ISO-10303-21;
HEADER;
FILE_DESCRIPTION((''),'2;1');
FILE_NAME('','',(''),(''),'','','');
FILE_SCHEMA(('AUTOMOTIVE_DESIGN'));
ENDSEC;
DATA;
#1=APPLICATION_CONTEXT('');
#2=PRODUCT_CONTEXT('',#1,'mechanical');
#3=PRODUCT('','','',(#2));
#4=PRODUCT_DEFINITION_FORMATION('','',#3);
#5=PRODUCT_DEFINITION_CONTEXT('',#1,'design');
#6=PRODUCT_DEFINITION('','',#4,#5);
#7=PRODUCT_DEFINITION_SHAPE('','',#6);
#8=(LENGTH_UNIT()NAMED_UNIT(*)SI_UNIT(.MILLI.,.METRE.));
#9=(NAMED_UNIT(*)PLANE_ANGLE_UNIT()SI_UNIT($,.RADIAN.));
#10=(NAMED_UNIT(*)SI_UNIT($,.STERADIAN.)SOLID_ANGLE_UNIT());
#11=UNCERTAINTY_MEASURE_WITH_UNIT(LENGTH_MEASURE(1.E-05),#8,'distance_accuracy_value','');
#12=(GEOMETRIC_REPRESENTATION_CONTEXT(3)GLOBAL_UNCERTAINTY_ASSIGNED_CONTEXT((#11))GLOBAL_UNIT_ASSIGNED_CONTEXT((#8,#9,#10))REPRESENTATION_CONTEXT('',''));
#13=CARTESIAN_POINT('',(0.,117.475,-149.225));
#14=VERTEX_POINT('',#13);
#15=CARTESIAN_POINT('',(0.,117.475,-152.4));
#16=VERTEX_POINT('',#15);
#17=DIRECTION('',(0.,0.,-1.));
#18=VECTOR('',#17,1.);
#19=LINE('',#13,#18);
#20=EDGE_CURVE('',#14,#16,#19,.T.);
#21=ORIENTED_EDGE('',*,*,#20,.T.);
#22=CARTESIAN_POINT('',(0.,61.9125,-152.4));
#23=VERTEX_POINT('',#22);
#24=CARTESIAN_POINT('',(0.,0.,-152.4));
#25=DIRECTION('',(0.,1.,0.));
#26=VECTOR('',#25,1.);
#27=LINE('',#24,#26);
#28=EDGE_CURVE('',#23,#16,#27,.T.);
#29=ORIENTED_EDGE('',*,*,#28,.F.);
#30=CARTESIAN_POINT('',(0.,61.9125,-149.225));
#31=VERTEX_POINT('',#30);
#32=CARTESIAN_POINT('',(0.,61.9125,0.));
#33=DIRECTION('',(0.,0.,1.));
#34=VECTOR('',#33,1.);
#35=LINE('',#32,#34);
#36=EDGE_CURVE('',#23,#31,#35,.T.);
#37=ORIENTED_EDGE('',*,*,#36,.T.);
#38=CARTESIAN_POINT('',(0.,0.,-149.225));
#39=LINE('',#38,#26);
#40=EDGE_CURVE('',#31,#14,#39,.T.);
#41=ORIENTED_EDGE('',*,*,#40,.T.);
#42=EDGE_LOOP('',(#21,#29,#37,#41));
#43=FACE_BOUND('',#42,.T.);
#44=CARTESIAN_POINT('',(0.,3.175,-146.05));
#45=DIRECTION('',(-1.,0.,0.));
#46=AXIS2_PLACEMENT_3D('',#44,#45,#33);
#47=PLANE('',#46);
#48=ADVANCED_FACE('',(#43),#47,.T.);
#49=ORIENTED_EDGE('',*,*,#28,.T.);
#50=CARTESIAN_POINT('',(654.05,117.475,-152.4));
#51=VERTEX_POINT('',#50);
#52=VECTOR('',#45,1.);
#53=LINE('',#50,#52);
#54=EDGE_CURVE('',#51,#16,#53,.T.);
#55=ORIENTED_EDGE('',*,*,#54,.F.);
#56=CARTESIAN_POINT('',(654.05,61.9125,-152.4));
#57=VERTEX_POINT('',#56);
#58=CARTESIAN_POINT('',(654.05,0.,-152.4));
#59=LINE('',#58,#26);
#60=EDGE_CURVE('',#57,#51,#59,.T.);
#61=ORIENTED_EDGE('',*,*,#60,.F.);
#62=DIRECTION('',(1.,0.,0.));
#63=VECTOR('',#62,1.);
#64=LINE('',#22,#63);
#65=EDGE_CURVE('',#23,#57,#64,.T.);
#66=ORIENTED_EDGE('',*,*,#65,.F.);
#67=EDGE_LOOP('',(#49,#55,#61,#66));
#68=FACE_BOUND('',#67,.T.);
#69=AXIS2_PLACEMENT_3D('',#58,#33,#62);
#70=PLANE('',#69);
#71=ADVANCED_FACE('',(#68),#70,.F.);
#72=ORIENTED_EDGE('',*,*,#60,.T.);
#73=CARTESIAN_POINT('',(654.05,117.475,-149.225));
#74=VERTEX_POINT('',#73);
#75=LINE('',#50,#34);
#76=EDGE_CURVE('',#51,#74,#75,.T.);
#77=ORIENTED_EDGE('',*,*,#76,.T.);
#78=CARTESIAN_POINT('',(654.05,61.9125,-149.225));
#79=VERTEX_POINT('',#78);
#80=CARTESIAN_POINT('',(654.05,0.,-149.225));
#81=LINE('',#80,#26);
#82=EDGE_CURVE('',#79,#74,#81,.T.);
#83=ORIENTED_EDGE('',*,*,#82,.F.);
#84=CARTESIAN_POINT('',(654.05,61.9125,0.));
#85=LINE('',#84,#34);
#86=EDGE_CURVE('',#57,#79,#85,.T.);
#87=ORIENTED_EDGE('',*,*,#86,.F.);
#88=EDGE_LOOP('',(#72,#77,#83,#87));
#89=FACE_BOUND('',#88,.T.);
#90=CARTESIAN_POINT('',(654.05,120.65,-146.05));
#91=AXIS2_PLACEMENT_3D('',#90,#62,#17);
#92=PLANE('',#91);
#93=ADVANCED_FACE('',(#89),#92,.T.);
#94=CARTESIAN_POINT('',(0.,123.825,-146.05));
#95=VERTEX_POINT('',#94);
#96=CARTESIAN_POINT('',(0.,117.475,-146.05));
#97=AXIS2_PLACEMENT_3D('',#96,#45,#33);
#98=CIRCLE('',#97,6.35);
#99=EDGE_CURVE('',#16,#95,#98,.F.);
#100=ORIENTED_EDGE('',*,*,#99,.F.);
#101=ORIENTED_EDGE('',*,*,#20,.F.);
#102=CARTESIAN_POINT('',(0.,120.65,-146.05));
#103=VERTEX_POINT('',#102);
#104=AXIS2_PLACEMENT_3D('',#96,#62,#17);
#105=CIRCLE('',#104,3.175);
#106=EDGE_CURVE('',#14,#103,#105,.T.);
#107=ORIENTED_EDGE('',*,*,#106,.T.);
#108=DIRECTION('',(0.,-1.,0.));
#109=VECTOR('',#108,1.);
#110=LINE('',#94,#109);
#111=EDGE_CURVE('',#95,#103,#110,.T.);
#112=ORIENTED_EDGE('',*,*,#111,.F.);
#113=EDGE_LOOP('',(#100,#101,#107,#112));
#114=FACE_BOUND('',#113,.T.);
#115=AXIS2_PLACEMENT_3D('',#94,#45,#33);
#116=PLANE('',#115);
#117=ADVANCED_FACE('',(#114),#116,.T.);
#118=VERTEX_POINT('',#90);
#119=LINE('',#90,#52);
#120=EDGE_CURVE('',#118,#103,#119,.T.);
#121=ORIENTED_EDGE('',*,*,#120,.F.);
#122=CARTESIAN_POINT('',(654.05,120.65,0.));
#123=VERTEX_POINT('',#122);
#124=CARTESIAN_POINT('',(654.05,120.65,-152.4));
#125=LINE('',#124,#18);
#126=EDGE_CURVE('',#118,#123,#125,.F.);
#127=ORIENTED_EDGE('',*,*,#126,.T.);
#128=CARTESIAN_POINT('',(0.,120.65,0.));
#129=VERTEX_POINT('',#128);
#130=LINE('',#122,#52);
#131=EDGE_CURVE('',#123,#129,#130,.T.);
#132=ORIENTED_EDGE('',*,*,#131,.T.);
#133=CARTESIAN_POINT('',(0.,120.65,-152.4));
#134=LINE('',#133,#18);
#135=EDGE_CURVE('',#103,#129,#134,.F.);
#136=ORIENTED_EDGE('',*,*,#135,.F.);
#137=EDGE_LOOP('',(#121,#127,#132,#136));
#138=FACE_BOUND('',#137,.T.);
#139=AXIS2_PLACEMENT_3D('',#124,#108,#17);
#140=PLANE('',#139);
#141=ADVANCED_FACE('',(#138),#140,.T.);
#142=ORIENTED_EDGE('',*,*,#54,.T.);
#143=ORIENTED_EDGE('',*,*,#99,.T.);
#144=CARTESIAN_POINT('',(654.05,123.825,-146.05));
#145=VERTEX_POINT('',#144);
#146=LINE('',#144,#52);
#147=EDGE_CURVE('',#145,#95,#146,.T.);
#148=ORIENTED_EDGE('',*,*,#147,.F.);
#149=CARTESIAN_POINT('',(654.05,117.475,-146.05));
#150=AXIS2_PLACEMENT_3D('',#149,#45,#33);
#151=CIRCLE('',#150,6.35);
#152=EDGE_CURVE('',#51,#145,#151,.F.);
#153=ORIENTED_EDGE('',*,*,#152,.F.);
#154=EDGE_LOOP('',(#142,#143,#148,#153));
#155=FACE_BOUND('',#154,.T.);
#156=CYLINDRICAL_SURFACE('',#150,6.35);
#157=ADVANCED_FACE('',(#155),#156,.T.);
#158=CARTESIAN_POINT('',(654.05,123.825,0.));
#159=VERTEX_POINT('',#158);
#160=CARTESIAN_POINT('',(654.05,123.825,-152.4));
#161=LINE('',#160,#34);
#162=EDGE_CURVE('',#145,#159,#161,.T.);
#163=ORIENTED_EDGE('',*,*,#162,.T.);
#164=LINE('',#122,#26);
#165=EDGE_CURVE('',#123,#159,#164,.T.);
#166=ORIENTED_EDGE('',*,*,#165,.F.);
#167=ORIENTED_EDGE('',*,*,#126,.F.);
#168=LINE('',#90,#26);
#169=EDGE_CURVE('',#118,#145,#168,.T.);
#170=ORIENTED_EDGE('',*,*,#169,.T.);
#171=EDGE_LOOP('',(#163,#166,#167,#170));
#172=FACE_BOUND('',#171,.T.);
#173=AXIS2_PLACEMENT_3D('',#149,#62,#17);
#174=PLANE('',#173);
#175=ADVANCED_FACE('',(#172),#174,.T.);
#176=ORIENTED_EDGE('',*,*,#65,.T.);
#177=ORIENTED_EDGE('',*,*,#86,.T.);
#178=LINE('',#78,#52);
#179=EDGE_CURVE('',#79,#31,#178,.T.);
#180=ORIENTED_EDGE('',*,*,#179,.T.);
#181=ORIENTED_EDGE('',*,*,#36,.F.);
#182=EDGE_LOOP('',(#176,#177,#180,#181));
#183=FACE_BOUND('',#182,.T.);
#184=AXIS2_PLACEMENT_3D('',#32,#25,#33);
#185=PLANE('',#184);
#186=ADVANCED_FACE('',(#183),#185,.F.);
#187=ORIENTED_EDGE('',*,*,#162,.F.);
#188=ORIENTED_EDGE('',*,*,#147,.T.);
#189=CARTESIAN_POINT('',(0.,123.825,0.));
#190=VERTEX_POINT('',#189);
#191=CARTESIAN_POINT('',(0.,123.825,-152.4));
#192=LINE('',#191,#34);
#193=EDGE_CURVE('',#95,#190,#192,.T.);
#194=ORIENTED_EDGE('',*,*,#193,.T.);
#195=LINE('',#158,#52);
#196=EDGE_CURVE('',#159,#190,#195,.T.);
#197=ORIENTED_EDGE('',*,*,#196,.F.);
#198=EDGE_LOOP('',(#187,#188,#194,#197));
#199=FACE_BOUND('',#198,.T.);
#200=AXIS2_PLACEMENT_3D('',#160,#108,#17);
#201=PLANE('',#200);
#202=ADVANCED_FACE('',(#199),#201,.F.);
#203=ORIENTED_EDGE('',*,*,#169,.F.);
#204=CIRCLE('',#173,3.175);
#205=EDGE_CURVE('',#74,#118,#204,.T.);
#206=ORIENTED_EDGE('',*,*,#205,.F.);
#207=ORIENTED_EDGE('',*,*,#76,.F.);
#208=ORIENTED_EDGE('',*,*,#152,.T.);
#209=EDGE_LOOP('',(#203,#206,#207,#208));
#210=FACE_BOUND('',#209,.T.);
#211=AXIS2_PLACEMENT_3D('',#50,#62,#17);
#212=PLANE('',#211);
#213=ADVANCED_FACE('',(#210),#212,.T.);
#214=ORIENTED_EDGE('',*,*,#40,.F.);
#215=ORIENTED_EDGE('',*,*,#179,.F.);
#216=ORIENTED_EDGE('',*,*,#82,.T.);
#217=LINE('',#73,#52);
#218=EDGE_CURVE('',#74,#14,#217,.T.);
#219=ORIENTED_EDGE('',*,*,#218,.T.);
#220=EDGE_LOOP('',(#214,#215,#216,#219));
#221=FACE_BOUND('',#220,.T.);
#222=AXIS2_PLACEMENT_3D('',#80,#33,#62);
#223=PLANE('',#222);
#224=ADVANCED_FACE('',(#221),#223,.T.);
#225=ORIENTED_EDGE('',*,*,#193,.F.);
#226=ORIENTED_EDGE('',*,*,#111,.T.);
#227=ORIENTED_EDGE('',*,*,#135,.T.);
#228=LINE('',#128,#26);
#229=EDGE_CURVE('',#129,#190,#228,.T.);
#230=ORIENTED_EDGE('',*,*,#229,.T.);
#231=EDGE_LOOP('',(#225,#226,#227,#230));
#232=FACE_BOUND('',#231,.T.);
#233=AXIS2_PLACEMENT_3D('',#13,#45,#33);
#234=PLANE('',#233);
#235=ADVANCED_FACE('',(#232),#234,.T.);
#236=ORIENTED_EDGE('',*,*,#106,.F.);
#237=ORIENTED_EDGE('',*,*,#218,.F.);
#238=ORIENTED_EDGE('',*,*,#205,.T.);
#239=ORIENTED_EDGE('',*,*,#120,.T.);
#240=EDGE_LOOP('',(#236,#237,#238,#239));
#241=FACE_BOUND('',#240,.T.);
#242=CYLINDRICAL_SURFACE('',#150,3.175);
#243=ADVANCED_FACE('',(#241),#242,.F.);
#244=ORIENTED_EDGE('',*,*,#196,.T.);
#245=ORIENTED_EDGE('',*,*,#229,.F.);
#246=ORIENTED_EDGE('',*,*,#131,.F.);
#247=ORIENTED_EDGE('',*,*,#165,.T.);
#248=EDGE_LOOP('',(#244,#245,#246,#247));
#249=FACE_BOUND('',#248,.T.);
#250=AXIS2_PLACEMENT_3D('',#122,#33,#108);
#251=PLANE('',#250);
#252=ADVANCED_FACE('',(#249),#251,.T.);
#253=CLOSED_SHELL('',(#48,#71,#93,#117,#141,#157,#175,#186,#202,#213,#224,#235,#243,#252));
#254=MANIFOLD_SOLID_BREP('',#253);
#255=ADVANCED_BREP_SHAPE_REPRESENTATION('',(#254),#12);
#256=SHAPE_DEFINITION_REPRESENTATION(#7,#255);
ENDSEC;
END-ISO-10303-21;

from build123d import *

# Parameters (mm, degrees)
BASE_FLANGE1_DEPTH = 654.05
SKETCH10_W         = 152.4
SKETCH10_H         = 61.9125
CUT_EXTRUDE5_DEPTH = 683.89076222


# Sheet-metal steps are written as plain solids
with BuildPart() as part:
    # Sketch1 → Base-Flange1 (new body)
    with BuildSketch(Plane(origin=(0, 0, 0), x_dir=(0, 0, -1), z_dir=(1, 0, 0))):
        with BuildLine():
            Line((0, 0), (146.05, 0))
            ThreePointArc((146.05, 0), (150.540128061, 1.859871939), (152.4, 6.35))
            Line((152.4, 6.35), (152.4, 117.475))
            ThreePointArc((152.4, 117.475), (150.540128061, 121.965128061), (146.05, 123.825))
            Line((146.05, 123.825), (0, 123.825))
            Line((0, 123.825), (0, 120.65))
            Line((0, 120.65), (146.05, 120.65))
            ThreePointArc((146.05, 120.65), (148.29506403, 119.72006403), (149.225, 117.475))
            Line((149.225, 117.475), (149.225, 6.35))
            ThreePointArc((149.225, 6.35), (148.29506403, 4.10493597), (146.05, 3.175))
            Line((146.05, 3.175), (0, 3.175))
            Line((0, 3.175), (0, 0))
        make_face()
    extrude(amount=BASE_FLANGE1_DEPTH)

    # Sketch10 → Cut-Extrude5 (cut, through all)
    with BuildSketch(Plane(origin=(654.05, 0, 0), x_dir=(0, 0, -1), z_dir=(1, 0, 0))):
        with Locations((76.2, 30.95625)):
            Rectangle(SKETCH10_W, SKETCH10_H)
    extrude(amount=-CUT_EXTRUDE5_DEPTH, mode=Mode.SUBTRACT)


solid = part.part
